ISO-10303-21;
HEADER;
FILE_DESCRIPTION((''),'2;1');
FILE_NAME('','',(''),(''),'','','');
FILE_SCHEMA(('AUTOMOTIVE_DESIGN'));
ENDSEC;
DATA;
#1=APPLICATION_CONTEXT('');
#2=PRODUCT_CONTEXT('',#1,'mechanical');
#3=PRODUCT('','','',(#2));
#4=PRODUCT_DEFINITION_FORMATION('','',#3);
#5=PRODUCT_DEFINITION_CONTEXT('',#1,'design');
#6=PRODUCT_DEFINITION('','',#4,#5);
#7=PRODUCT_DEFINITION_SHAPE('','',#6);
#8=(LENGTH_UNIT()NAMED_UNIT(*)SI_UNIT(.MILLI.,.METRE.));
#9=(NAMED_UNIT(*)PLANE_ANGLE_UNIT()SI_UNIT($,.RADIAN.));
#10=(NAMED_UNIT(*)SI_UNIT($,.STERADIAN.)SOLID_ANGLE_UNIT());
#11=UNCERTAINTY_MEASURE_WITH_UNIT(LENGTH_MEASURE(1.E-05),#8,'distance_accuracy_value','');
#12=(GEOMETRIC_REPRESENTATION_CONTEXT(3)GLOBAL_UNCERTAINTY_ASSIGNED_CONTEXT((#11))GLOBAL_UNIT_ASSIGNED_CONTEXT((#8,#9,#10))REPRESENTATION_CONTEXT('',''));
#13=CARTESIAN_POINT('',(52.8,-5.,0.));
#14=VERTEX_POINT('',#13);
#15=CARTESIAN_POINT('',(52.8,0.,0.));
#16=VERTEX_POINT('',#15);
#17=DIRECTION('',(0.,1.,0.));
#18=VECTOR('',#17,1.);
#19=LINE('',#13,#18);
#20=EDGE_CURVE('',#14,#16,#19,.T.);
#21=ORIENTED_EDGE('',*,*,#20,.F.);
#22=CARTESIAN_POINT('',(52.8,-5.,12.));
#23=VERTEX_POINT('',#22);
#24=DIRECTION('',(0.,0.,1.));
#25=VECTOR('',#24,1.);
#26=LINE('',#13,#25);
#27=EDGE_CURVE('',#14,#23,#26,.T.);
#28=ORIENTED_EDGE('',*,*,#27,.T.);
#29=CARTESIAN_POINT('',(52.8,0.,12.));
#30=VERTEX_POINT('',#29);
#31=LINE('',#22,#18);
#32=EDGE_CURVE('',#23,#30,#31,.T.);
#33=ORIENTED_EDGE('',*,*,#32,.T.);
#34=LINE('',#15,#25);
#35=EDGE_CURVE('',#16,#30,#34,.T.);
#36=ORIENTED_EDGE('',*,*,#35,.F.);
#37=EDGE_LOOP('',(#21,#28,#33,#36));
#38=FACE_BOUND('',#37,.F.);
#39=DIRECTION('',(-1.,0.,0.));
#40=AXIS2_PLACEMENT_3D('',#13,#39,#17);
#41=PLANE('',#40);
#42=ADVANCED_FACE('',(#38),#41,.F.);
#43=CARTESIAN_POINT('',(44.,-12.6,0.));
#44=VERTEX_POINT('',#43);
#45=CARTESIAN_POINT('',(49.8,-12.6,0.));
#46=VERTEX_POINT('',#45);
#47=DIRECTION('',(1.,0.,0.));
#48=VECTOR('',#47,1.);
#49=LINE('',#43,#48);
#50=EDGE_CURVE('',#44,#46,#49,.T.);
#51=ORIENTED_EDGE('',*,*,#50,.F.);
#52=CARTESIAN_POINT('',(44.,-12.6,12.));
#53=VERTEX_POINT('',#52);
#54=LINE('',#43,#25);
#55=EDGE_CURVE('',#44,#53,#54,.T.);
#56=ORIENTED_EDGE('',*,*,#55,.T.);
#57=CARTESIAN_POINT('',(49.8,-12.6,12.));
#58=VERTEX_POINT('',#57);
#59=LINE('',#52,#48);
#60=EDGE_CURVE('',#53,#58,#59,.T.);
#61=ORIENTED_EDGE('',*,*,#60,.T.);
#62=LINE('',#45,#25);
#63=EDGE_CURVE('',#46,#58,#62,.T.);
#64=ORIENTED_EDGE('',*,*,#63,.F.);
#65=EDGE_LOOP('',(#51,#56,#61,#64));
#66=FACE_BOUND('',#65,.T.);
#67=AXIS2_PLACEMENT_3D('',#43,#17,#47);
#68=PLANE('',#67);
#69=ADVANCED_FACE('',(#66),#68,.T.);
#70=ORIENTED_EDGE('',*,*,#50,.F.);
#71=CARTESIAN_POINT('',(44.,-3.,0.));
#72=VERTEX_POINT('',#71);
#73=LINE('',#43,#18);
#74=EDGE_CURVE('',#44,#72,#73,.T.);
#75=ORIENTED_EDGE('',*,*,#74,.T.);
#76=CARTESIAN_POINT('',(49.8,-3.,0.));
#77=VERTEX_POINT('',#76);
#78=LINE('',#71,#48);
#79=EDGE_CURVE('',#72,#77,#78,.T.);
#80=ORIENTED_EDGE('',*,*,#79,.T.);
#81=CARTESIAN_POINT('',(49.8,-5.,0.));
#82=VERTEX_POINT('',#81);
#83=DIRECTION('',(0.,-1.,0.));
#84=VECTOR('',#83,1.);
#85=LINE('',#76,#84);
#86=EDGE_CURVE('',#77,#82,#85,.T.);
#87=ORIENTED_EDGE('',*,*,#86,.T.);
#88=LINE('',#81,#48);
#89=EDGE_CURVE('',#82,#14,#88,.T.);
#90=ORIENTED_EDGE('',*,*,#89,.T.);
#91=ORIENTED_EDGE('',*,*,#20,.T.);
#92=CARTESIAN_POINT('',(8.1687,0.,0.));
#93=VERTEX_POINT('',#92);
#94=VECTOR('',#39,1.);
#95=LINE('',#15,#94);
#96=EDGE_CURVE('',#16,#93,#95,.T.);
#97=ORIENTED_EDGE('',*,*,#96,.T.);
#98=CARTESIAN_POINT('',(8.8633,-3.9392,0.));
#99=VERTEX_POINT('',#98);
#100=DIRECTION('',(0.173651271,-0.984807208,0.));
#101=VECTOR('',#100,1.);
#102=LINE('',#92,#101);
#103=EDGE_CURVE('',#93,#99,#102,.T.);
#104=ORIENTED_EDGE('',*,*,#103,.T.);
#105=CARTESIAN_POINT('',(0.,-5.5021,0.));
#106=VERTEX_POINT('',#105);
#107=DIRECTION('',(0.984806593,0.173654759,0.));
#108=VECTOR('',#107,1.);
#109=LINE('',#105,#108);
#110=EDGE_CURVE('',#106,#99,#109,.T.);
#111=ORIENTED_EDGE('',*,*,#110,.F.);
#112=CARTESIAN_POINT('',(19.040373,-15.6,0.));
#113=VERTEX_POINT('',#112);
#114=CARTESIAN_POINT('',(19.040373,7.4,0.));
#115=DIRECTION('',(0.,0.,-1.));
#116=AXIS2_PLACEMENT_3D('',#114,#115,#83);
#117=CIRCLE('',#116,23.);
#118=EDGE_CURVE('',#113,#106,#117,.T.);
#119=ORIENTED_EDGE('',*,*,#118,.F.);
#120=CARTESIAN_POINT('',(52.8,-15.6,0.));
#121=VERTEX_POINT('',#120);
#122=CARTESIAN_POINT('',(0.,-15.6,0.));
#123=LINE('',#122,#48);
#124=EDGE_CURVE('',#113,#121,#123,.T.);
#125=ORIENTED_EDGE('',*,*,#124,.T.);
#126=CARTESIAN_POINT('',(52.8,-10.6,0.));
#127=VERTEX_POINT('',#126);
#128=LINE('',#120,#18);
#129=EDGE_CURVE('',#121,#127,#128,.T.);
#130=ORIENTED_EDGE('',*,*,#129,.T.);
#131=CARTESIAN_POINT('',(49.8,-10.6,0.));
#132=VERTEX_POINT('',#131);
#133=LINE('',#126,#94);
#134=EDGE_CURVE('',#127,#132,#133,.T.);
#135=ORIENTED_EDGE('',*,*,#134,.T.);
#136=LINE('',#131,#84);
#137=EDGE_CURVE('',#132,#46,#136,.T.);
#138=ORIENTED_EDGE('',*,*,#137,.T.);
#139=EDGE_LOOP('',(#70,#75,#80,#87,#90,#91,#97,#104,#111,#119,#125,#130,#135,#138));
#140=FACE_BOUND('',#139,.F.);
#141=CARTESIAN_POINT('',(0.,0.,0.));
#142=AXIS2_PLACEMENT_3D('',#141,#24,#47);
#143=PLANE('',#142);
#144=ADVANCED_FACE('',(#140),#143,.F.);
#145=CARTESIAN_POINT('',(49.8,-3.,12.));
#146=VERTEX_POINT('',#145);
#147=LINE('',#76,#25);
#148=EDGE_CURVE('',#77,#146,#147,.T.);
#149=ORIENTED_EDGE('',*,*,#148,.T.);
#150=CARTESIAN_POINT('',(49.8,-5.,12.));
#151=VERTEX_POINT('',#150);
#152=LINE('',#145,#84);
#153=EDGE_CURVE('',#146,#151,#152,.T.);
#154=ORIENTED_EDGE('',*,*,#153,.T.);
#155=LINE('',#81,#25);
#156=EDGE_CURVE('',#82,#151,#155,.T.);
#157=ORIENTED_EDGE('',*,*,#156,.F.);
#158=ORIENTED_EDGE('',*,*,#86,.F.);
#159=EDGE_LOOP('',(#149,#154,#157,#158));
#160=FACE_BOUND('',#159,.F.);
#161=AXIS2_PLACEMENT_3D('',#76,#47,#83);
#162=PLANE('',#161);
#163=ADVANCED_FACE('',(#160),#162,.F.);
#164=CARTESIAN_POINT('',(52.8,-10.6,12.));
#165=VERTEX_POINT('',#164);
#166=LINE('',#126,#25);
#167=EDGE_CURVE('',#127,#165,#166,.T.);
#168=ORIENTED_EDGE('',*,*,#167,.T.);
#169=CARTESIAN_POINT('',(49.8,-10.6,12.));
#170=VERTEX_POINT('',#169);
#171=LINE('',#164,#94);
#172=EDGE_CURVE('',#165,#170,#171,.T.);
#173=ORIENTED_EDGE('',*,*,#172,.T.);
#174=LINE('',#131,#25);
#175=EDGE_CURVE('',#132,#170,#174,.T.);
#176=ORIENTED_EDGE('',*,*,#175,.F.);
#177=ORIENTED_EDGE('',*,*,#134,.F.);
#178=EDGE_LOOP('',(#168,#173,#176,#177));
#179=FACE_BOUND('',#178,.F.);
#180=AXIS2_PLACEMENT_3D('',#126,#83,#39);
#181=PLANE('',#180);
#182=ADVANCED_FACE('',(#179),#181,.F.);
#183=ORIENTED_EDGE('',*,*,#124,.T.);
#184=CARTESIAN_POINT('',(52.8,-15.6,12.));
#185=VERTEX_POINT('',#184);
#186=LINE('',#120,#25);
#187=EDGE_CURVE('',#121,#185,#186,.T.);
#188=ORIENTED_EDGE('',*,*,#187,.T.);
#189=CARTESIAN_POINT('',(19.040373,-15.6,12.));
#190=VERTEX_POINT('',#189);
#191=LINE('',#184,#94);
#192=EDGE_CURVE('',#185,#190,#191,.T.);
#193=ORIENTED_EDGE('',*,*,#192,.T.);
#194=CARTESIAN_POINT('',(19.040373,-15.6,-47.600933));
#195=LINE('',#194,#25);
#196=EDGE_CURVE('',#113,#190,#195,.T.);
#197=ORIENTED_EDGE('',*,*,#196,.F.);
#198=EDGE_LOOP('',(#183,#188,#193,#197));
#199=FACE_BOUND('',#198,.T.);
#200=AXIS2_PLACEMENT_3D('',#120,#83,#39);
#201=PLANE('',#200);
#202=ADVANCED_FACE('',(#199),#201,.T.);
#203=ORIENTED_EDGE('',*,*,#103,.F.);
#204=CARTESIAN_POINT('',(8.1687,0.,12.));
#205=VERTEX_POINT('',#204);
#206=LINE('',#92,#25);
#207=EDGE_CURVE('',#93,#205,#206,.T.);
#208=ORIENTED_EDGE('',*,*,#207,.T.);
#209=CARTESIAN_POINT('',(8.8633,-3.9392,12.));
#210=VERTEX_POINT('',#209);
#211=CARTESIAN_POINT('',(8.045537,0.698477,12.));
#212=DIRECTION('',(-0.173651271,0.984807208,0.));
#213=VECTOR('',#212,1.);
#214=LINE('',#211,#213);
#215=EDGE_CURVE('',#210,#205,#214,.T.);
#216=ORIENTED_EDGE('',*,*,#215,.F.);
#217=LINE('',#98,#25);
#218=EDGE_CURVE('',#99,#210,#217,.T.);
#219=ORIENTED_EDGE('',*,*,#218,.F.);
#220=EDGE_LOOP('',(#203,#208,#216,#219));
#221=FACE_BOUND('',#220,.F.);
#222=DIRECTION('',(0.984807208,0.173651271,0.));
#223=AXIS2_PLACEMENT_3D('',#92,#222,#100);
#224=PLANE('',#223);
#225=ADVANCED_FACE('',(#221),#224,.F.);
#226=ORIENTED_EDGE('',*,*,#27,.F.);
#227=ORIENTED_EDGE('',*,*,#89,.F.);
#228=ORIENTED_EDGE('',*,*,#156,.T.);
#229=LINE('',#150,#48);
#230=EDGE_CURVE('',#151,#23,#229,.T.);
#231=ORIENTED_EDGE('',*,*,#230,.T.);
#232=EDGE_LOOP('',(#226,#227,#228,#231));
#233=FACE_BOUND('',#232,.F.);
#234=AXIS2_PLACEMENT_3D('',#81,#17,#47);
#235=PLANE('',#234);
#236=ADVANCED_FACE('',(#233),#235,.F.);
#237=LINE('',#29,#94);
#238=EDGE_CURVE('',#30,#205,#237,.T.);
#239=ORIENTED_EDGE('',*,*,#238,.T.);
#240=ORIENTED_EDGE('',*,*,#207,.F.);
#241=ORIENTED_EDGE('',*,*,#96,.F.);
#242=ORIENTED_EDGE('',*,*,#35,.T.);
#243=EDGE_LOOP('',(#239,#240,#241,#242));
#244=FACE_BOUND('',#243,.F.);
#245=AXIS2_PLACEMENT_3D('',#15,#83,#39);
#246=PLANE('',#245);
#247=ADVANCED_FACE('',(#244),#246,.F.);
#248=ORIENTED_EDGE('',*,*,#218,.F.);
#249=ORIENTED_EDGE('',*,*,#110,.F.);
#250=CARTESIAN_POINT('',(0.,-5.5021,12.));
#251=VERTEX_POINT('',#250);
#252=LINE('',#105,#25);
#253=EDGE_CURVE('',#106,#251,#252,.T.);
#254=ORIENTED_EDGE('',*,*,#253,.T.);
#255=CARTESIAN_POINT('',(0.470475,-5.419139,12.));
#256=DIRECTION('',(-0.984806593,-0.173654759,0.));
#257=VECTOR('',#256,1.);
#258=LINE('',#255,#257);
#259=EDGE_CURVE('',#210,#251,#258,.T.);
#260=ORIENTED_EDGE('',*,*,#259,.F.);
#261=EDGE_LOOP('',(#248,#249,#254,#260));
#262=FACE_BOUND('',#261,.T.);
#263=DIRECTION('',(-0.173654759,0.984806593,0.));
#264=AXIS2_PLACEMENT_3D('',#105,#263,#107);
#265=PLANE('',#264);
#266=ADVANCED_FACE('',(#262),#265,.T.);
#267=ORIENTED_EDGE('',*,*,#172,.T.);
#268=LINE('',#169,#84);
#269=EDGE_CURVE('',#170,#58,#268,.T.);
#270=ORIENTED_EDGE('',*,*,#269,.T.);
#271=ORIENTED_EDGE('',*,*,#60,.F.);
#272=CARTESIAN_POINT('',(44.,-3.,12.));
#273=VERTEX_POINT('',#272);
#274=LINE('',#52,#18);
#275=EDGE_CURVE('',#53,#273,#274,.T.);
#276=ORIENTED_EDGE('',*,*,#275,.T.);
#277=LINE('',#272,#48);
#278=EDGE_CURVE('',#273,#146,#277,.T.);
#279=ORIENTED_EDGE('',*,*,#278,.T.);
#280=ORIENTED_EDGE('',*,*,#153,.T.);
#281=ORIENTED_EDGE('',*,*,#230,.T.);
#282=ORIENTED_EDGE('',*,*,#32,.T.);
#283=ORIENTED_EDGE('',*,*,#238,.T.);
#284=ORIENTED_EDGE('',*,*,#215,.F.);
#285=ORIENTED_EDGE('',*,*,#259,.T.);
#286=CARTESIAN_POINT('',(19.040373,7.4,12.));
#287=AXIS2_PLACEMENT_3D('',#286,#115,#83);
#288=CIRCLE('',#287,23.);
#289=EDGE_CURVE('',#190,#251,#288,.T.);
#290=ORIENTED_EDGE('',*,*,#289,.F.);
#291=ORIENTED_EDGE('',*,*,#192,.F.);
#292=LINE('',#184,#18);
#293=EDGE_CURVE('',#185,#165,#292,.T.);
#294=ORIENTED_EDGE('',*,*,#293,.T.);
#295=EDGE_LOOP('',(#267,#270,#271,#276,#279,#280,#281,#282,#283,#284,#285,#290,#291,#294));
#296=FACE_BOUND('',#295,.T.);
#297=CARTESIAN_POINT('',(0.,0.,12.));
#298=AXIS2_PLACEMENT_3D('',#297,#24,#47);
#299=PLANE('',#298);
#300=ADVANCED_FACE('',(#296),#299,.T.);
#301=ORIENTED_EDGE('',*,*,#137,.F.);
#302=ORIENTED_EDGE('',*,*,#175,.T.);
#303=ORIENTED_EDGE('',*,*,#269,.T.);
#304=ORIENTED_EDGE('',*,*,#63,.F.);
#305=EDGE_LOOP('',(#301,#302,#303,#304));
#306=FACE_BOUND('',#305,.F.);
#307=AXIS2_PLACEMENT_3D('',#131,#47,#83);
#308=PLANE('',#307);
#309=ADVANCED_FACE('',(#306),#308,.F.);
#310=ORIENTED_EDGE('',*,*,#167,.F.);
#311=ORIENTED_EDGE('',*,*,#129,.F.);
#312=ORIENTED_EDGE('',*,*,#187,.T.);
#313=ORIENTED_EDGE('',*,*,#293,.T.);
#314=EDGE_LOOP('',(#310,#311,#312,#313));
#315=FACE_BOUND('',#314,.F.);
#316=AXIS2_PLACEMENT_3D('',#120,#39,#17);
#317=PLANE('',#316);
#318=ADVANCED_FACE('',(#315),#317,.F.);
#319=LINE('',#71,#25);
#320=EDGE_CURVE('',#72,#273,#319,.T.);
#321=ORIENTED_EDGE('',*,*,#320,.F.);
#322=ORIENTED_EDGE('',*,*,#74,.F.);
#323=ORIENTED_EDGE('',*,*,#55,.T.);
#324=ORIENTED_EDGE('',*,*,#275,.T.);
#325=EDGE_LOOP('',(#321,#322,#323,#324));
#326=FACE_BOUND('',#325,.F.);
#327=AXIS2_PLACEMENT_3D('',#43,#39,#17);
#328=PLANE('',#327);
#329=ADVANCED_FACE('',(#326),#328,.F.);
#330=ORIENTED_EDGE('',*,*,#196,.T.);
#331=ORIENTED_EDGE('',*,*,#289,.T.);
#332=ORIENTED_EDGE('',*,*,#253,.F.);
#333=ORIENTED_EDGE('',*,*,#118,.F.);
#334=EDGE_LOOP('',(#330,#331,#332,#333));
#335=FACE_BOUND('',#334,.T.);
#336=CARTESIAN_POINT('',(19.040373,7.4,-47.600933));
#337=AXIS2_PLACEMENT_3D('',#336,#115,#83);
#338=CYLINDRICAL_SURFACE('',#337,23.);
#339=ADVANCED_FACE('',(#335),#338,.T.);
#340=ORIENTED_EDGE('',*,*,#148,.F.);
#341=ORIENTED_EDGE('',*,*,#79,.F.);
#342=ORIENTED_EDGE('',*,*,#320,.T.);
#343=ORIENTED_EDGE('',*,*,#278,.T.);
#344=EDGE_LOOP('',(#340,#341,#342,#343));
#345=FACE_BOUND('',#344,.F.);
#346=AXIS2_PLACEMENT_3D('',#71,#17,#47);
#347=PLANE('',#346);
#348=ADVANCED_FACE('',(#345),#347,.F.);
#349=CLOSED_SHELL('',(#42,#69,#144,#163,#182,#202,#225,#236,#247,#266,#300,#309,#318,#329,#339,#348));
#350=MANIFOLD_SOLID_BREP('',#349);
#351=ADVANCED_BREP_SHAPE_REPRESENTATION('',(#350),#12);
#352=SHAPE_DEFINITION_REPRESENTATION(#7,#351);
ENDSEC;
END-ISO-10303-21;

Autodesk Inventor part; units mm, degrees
ref_plane "YZ Plane" through (0, 0, 0) normal (1, 0, 0) x (0, 1, 0)
ref_plane "XZ Plane" through (0, 0, 0) normal (0, 1, 0) x (-1, 0, 0)
ref_plane "XY Plane" through (0, 0, 0) normal (0, 0, 1) x (1, 0, 0)
sketch "Sketch5" plane through (0, 0, 0) normal (0, 0, 1) x (1, 0, 0)
  line L0 (52.8, -15.6) -> (52.8, -10.6)
  line L1 (52.8, -10.6) -> (49.8, -10.6)
  line L2 (49.8, -10.6) -> (49.8, -12.6)
  line L3 (44, -12.6) -> (44, -3)
  line L4 (49.8, -3) -> (49.8, -5)
  line L5 (49.8, -5) -> (52.8, -5)
  line L6 (52.8, -5) -> (52.8, 0)
  line L7 (52.8, 0) -> (7.8, 0)
  line L8 (44, -3) -> (49.8, -3)
  line L9 (44, -12.6) -> (49.8, -12.6)
  line L10 (52.8, -15.6) -> (7.8, -15.6)
  line L11 (7.8, -15.6) -> (0, -15.6)
  line L12 (0, -15.6) -> (0, 0)
  line L13 (0, 0) -> (7.8, 0)
  point P0 (7.8, 0)
  dimension "d41" = 5.8
  dimension "d48" = 44
  dimension "d50" = 3
  dimension "d63" = 45
  dimension "d71" = 0
  dimension "d87" = 5.6
  dimension "d88" = 9.6
  dimension "d97" = 15.6
extrude "Extrusion2" add sketch "Sketch5" along normal blind 12
sketch "Sketch8" plane through (0, 0, 0) normal (0, 0, -1) x (-1, 0, 0)
  line L0 (-8.1687, 0) -> (-8.8633, -3.9392)
  line L1 (-7.8, 0) -> (-1.143, 0) construction
  line L2 (0, -5.5021) -> (-8.8633, -3.9392)
  line L3 (-7.8, 0) -> (-8.1687, 0)
  line L4 (0, 0) -> (0, -15.6) projected
  line L5 (-52.8, 0) -> (0, 0) projected
  line L6 (-7.8, 0) -> (0, 0)
  line L7 (0, 0) -> (0, -5.5021)
  dimension "d80" = 100
  dimension "d95" = 4
  dimension "d96" = 9
extrude "Extrusion5" cut sketch "Sketch8" against normal through all
fillet "Fillet2" radius 23 1 edges at (0, -15.6, 6)
equation "\"l1\" = 8"
properties part number "Finray_test_8_Kerbe_10deg"
